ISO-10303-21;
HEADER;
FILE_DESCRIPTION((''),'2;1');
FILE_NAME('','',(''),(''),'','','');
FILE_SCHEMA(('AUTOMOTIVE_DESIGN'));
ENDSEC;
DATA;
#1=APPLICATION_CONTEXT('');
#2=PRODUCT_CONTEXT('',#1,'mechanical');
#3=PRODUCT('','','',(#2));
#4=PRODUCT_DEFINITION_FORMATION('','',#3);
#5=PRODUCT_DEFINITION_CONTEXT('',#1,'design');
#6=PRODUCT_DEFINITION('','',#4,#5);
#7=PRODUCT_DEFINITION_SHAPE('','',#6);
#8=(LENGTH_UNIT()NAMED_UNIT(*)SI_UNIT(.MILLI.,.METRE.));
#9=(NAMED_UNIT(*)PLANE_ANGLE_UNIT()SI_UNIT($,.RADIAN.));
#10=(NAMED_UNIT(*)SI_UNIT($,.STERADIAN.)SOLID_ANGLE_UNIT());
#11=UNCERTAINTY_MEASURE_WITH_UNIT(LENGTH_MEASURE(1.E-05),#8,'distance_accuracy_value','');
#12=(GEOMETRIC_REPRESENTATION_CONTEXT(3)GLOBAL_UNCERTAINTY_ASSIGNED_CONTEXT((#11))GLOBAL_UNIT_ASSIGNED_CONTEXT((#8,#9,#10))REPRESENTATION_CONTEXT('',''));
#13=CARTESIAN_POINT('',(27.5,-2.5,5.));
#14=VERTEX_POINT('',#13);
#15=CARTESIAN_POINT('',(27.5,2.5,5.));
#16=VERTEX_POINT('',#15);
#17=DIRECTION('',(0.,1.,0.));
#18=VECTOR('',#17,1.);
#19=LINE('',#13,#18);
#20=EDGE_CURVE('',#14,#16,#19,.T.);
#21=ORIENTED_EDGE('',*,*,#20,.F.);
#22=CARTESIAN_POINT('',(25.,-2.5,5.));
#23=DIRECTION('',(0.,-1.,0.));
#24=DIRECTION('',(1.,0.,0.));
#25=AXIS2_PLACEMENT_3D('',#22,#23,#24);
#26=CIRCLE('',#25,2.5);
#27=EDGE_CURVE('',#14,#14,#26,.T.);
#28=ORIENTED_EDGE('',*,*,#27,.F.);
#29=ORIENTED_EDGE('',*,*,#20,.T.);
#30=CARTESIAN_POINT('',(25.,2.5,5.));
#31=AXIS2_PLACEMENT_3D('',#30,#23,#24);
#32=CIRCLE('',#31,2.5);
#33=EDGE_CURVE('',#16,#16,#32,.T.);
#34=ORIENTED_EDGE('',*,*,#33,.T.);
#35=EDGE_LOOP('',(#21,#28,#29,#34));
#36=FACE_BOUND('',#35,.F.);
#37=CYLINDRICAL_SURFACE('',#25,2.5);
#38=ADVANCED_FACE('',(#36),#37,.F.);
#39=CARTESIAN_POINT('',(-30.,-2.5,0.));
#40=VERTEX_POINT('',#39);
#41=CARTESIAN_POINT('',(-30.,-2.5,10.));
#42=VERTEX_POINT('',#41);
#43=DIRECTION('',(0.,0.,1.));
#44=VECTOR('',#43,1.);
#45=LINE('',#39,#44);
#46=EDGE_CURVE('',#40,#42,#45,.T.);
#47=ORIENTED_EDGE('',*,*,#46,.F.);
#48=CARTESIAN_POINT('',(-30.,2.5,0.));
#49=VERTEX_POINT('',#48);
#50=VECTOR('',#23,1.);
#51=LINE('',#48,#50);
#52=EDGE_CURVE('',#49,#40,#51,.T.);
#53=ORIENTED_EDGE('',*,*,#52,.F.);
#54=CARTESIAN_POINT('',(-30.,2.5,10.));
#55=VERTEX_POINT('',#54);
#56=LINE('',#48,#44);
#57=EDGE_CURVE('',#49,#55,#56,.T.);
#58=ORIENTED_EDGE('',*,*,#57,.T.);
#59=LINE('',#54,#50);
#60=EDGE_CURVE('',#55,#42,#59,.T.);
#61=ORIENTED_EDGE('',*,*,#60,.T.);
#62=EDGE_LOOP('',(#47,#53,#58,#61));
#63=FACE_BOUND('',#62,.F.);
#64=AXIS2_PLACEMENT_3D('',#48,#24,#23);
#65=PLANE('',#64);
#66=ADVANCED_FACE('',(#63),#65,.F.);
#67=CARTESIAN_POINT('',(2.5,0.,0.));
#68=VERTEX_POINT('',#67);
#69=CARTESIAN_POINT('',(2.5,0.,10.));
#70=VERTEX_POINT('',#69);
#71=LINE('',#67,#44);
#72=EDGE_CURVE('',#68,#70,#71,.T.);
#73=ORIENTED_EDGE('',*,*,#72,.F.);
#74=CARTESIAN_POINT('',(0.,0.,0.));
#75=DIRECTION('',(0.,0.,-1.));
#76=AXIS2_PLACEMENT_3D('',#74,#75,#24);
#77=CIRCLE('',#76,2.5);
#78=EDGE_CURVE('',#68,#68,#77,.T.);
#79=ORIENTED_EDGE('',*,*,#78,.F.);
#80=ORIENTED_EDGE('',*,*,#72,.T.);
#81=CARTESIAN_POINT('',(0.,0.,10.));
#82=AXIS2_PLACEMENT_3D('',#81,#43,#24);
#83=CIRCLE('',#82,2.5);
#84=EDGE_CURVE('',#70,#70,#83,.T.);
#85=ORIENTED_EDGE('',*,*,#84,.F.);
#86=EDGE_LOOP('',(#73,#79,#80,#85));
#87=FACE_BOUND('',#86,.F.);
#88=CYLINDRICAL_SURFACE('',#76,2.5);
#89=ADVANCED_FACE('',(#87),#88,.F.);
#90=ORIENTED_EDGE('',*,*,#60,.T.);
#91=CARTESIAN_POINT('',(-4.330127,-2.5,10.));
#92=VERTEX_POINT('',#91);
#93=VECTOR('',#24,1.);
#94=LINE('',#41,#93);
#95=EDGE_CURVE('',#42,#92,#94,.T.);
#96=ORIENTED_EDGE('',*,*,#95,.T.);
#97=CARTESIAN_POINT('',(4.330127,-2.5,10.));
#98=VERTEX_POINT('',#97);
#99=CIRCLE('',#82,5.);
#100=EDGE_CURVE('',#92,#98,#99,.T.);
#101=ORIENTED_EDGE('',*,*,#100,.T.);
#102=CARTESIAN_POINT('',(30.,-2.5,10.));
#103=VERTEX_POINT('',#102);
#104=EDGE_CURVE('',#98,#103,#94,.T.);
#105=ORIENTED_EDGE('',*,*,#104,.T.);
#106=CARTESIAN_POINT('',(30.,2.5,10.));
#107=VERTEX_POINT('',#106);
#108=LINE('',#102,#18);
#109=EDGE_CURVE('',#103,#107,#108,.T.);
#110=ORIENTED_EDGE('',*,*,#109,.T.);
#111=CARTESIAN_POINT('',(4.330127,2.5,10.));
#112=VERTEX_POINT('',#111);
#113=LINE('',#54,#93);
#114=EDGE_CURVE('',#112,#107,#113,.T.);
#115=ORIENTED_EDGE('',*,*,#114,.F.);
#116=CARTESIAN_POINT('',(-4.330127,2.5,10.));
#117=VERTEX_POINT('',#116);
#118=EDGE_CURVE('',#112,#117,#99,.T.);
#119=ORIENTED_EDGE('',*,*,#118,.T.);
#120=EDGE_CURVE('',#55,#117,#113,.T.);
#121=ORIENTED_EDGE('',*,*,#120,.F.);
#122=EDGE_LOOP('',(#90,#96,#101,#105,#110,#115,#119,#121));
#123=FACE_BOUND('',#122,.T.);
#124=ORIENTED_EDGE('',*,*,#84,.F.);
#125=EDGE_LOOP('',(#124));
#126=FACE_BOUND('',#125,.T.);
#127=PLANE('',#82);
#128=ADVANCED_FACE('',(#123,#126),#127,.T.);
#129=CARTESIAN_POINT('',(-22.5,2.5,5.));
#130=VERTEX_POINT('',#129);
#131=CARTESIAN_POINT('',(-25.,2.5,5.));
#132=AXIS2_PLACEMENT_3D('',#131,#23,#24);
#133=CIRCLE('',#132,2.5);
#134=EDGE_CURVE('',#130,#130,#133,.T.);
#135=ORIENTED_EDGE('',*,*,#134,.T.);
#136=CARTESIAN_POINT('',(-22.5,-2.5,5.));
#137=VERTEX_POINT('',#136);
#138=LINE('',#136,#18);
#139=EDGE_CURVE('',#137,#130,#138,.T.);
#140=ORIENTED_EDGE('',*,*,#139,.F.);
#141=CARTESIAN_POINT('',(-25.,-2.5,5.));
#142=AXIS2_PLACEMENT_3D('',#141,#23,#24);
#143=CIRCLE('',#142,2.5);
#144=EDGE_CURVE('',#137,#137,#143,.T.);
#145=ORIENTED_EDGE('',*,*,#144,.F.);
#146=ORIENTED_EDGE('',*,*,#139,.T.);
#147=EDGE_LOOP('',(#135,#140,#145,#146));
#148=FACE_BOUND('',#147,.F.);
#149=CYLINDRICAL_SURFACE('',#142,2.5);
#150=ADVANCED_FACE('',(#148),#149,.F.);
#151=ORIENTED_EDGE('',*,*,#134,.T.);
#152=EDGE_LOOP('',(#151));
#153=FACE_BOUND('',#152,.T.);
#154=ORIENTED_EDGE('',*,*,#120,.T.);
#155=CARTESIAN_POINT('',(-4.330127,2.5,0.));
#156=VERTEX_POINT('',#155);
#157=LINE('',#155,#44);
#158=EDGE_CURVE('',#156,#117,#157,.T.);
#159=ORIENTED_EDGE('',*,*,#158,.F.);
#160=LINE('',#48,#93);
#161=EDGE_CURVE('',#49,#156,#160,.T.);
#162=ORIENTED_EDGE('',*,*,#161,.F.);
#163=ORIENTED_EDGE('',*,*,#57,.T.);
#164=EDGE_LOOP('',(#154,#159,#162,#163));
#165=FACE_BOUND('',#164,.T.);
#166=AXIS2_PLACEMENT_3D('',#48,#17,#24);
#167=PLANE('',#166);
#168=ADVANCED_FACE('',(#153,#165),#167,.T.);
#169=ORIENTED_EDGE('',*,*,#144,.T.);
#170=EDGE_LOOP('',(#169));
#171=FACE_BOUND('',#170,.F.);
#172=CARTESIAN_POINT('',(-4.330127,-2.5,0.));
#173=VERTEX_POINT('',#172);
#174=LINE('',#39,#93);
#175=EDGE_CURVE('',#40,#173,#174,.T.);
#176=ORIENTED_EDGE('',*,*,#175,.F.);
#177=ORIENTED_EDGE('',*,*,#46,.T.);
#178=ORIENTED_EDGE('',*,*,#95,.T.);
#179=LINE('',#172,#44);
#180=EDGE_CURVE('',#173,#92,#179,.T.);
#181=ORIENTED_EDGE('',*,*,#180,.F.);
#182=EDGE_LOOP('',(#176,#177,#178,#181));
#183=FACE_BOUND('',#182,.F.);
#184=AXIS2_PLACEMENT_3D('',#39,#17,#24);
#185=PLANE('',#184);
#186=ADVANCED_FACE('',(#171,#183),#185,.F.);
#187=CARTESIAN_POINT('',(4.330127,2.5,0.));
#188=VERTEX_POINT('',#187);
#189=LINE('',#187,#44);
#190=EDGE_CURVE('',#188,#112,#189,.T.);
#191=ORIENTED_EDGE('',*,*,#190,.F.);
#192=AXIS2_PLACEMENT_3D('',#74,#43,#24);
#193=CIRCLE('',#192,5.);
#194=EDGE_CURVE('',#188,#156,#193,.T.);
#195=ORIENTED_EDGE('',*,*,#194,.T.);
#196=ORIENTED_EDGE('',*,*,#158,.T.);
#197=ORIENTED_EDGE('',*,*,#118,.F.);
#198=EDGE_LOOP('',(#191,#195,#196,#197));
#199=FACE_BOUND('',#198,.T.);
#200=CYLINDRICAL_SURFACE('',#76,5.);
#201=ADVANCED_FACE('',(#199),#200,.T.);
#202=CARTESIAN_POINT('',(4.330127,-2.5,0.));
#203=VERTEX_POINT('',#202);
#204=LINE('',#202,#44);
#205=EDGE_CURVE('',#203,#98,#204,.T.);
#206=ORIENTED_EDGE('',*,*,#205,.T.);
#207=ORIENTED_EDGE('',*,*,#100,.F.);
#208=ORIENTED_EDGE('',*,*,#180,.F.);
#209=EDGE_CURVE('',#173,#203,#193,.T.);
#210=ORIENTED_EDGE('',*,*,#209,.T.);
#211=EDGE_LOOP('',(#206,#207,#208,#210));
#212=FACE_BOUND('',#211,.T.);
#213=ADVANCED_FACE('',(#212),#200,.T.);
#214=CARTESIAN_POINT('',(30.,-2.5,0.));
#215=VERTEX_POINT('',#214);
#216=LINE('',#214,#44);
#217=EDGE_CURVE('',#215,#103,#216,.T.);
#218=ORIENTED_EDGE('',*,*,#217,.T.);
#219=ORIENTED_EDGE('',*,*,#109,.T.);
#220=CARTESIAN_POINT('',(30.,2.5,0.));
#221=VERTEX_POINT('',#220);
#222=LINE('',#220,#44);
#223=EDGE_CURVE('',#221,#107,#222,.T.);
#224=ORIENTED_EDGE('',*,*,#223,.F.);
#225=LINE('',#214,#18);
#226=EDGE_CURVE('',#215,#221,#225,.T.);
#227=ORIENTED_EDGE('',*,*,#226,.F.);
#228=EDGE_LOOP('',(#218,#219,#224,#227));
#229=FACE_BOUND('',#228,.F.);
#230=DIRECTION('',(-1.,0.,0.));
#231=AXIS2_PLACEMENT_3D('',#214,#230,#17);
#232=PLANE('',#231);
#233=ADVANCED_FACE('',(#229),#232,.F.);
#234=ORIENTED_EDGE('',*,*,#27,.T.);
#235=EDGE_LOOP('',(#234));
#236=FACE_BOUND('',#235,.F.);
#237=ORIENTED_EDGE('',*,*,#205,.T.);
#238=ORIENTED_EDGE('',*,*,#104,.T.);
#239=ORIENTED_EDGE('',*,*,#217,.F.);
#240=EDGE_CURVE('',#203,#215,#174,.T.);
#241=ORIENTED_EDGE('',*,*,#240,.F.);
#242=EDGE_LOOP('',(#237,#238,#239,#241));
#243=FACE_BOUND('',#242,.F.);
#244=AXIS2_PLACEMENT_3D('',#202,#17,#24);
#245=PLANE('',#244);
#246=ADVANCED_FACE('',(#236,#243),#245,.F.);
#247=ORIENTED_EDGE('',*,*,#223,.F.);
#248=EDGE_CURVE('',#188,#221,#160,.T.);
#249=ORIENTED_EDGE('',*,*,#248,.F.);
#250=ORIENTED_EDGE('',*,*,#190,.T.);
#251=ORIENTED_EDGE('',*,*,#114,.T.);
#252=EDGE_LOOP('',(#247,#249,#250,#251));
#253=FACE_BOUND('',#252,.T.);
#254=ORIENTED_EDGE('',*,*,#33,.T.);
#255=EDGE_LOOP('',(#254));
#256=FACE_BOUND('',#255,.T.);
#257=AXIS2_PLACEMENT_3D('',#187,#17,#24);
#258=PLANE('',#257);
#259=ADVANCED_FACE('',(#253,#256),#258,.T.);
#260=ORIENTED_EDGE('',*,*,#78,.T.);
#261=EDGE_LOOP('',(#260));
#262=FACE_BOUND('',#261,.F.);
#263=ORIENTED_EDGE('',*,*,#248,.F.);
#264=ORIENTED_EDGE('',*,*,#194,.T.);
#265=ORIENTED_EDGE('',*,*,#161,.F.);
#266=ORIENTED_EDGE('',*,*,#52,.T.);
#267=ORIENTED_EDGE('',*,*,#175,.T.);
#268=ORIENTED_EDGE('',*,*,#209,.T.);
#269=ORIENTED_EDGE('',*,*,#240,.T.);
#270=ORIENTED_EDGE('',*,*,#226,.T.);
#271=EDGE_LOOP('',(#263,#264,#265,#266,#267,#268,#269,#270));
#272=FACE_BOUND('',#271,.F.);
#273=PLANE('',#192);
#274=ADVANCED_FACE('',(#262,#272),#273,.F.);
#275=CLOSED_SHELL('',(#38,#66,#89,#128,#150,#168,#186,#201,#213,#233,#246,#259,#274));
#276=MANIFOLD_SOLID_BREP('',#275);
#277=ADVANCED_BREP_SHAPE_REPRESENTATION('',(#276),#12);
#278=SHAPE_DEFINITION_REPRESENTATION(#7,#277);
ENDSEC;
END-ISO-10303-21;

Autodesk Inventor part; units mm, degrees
ref_plane "YZ Plane" through (0, 0, 0) normal (1, 0, 0) x (0, 1, 0)
ref_plane "XZ Plane" through (0, 0, 0) normal (0, 1, 0) x (-1, 0, 0)
ref_plane "XY Plane" through (0, 0, 0) normal (0, 0, 1) x (1, 0, 0)
sketch "Sketch1" plane through (0, 0, 0) normal (0, 0, 1) x (1, 0, 0)
  circle A0 centre (0, 0) radius 2.5
  circle A1 centre (0, 0) radius 5
  line L0 (-30, 2.5) -> (30, 2.5)
  line L1 (-30, -2.5) -> (30, -2.5)
  line L2 (30, -2.5) -> (30, 2.5)
  line L3 (-30, 2.5) -> (-30, -2.5)
  dimension "d0" = 5
  dimension "d1" = 10
  dimension "d2" = 5
  dimension "d3" = 2.5
  dimension "d4" = 60
  dimension "d5" = 30
extrude "Extrusion1" add sketch "Sketch1" along normal blind 10 contours A0 L0 A1 L1 | A0 L1 A1 L0 | L0 A1 | L1 A1 | A1 L1 L3 L0 | L0 L2 L1 A1
sketch "Sketch2" plane through (4.3301, -2.5, 0) normal (0, -1, 0) x (1, 0, 0)
  line L0 (-8.6603, 10) -> (-8.6603, 0) projected
  line L1 (-34.3301, 10) -> (-8.6603, 10) projected
  line L2 (-34.3301, 0) -> (-34.3301, 10) projected
  line L3 (-8.6603, 0) -> (-34.3301, 0) projected
  line L4 (0, 0) -> (0, 10) projected
  line L5 (25.6699, 0) -> (0, 0) projected
  line L6 (25.6699, 0) -> (25.6699, 10) projected
  line L7 (0, 10) -> (25.6699, 10) projected
  circle A0 centre (-29.3301, 5) radius 2.5
  circle A1 centre (20.6699, 5) radius 2.5
  point P0 (-4.3301, 0)
  dimension "d8" = 5
  dimension "d9" = 5
  dimension "d10" = 5
  dimension "d11" = 5
  dimension "d12" = 5
  dimension "d13" = 5
extrude "Extrusion2" cut sketch "Sketch2" against normal blind 10 contours A0 | A1
properties part number "Y_Rail_Alignement _Connector_SquareBar-Rev3"
